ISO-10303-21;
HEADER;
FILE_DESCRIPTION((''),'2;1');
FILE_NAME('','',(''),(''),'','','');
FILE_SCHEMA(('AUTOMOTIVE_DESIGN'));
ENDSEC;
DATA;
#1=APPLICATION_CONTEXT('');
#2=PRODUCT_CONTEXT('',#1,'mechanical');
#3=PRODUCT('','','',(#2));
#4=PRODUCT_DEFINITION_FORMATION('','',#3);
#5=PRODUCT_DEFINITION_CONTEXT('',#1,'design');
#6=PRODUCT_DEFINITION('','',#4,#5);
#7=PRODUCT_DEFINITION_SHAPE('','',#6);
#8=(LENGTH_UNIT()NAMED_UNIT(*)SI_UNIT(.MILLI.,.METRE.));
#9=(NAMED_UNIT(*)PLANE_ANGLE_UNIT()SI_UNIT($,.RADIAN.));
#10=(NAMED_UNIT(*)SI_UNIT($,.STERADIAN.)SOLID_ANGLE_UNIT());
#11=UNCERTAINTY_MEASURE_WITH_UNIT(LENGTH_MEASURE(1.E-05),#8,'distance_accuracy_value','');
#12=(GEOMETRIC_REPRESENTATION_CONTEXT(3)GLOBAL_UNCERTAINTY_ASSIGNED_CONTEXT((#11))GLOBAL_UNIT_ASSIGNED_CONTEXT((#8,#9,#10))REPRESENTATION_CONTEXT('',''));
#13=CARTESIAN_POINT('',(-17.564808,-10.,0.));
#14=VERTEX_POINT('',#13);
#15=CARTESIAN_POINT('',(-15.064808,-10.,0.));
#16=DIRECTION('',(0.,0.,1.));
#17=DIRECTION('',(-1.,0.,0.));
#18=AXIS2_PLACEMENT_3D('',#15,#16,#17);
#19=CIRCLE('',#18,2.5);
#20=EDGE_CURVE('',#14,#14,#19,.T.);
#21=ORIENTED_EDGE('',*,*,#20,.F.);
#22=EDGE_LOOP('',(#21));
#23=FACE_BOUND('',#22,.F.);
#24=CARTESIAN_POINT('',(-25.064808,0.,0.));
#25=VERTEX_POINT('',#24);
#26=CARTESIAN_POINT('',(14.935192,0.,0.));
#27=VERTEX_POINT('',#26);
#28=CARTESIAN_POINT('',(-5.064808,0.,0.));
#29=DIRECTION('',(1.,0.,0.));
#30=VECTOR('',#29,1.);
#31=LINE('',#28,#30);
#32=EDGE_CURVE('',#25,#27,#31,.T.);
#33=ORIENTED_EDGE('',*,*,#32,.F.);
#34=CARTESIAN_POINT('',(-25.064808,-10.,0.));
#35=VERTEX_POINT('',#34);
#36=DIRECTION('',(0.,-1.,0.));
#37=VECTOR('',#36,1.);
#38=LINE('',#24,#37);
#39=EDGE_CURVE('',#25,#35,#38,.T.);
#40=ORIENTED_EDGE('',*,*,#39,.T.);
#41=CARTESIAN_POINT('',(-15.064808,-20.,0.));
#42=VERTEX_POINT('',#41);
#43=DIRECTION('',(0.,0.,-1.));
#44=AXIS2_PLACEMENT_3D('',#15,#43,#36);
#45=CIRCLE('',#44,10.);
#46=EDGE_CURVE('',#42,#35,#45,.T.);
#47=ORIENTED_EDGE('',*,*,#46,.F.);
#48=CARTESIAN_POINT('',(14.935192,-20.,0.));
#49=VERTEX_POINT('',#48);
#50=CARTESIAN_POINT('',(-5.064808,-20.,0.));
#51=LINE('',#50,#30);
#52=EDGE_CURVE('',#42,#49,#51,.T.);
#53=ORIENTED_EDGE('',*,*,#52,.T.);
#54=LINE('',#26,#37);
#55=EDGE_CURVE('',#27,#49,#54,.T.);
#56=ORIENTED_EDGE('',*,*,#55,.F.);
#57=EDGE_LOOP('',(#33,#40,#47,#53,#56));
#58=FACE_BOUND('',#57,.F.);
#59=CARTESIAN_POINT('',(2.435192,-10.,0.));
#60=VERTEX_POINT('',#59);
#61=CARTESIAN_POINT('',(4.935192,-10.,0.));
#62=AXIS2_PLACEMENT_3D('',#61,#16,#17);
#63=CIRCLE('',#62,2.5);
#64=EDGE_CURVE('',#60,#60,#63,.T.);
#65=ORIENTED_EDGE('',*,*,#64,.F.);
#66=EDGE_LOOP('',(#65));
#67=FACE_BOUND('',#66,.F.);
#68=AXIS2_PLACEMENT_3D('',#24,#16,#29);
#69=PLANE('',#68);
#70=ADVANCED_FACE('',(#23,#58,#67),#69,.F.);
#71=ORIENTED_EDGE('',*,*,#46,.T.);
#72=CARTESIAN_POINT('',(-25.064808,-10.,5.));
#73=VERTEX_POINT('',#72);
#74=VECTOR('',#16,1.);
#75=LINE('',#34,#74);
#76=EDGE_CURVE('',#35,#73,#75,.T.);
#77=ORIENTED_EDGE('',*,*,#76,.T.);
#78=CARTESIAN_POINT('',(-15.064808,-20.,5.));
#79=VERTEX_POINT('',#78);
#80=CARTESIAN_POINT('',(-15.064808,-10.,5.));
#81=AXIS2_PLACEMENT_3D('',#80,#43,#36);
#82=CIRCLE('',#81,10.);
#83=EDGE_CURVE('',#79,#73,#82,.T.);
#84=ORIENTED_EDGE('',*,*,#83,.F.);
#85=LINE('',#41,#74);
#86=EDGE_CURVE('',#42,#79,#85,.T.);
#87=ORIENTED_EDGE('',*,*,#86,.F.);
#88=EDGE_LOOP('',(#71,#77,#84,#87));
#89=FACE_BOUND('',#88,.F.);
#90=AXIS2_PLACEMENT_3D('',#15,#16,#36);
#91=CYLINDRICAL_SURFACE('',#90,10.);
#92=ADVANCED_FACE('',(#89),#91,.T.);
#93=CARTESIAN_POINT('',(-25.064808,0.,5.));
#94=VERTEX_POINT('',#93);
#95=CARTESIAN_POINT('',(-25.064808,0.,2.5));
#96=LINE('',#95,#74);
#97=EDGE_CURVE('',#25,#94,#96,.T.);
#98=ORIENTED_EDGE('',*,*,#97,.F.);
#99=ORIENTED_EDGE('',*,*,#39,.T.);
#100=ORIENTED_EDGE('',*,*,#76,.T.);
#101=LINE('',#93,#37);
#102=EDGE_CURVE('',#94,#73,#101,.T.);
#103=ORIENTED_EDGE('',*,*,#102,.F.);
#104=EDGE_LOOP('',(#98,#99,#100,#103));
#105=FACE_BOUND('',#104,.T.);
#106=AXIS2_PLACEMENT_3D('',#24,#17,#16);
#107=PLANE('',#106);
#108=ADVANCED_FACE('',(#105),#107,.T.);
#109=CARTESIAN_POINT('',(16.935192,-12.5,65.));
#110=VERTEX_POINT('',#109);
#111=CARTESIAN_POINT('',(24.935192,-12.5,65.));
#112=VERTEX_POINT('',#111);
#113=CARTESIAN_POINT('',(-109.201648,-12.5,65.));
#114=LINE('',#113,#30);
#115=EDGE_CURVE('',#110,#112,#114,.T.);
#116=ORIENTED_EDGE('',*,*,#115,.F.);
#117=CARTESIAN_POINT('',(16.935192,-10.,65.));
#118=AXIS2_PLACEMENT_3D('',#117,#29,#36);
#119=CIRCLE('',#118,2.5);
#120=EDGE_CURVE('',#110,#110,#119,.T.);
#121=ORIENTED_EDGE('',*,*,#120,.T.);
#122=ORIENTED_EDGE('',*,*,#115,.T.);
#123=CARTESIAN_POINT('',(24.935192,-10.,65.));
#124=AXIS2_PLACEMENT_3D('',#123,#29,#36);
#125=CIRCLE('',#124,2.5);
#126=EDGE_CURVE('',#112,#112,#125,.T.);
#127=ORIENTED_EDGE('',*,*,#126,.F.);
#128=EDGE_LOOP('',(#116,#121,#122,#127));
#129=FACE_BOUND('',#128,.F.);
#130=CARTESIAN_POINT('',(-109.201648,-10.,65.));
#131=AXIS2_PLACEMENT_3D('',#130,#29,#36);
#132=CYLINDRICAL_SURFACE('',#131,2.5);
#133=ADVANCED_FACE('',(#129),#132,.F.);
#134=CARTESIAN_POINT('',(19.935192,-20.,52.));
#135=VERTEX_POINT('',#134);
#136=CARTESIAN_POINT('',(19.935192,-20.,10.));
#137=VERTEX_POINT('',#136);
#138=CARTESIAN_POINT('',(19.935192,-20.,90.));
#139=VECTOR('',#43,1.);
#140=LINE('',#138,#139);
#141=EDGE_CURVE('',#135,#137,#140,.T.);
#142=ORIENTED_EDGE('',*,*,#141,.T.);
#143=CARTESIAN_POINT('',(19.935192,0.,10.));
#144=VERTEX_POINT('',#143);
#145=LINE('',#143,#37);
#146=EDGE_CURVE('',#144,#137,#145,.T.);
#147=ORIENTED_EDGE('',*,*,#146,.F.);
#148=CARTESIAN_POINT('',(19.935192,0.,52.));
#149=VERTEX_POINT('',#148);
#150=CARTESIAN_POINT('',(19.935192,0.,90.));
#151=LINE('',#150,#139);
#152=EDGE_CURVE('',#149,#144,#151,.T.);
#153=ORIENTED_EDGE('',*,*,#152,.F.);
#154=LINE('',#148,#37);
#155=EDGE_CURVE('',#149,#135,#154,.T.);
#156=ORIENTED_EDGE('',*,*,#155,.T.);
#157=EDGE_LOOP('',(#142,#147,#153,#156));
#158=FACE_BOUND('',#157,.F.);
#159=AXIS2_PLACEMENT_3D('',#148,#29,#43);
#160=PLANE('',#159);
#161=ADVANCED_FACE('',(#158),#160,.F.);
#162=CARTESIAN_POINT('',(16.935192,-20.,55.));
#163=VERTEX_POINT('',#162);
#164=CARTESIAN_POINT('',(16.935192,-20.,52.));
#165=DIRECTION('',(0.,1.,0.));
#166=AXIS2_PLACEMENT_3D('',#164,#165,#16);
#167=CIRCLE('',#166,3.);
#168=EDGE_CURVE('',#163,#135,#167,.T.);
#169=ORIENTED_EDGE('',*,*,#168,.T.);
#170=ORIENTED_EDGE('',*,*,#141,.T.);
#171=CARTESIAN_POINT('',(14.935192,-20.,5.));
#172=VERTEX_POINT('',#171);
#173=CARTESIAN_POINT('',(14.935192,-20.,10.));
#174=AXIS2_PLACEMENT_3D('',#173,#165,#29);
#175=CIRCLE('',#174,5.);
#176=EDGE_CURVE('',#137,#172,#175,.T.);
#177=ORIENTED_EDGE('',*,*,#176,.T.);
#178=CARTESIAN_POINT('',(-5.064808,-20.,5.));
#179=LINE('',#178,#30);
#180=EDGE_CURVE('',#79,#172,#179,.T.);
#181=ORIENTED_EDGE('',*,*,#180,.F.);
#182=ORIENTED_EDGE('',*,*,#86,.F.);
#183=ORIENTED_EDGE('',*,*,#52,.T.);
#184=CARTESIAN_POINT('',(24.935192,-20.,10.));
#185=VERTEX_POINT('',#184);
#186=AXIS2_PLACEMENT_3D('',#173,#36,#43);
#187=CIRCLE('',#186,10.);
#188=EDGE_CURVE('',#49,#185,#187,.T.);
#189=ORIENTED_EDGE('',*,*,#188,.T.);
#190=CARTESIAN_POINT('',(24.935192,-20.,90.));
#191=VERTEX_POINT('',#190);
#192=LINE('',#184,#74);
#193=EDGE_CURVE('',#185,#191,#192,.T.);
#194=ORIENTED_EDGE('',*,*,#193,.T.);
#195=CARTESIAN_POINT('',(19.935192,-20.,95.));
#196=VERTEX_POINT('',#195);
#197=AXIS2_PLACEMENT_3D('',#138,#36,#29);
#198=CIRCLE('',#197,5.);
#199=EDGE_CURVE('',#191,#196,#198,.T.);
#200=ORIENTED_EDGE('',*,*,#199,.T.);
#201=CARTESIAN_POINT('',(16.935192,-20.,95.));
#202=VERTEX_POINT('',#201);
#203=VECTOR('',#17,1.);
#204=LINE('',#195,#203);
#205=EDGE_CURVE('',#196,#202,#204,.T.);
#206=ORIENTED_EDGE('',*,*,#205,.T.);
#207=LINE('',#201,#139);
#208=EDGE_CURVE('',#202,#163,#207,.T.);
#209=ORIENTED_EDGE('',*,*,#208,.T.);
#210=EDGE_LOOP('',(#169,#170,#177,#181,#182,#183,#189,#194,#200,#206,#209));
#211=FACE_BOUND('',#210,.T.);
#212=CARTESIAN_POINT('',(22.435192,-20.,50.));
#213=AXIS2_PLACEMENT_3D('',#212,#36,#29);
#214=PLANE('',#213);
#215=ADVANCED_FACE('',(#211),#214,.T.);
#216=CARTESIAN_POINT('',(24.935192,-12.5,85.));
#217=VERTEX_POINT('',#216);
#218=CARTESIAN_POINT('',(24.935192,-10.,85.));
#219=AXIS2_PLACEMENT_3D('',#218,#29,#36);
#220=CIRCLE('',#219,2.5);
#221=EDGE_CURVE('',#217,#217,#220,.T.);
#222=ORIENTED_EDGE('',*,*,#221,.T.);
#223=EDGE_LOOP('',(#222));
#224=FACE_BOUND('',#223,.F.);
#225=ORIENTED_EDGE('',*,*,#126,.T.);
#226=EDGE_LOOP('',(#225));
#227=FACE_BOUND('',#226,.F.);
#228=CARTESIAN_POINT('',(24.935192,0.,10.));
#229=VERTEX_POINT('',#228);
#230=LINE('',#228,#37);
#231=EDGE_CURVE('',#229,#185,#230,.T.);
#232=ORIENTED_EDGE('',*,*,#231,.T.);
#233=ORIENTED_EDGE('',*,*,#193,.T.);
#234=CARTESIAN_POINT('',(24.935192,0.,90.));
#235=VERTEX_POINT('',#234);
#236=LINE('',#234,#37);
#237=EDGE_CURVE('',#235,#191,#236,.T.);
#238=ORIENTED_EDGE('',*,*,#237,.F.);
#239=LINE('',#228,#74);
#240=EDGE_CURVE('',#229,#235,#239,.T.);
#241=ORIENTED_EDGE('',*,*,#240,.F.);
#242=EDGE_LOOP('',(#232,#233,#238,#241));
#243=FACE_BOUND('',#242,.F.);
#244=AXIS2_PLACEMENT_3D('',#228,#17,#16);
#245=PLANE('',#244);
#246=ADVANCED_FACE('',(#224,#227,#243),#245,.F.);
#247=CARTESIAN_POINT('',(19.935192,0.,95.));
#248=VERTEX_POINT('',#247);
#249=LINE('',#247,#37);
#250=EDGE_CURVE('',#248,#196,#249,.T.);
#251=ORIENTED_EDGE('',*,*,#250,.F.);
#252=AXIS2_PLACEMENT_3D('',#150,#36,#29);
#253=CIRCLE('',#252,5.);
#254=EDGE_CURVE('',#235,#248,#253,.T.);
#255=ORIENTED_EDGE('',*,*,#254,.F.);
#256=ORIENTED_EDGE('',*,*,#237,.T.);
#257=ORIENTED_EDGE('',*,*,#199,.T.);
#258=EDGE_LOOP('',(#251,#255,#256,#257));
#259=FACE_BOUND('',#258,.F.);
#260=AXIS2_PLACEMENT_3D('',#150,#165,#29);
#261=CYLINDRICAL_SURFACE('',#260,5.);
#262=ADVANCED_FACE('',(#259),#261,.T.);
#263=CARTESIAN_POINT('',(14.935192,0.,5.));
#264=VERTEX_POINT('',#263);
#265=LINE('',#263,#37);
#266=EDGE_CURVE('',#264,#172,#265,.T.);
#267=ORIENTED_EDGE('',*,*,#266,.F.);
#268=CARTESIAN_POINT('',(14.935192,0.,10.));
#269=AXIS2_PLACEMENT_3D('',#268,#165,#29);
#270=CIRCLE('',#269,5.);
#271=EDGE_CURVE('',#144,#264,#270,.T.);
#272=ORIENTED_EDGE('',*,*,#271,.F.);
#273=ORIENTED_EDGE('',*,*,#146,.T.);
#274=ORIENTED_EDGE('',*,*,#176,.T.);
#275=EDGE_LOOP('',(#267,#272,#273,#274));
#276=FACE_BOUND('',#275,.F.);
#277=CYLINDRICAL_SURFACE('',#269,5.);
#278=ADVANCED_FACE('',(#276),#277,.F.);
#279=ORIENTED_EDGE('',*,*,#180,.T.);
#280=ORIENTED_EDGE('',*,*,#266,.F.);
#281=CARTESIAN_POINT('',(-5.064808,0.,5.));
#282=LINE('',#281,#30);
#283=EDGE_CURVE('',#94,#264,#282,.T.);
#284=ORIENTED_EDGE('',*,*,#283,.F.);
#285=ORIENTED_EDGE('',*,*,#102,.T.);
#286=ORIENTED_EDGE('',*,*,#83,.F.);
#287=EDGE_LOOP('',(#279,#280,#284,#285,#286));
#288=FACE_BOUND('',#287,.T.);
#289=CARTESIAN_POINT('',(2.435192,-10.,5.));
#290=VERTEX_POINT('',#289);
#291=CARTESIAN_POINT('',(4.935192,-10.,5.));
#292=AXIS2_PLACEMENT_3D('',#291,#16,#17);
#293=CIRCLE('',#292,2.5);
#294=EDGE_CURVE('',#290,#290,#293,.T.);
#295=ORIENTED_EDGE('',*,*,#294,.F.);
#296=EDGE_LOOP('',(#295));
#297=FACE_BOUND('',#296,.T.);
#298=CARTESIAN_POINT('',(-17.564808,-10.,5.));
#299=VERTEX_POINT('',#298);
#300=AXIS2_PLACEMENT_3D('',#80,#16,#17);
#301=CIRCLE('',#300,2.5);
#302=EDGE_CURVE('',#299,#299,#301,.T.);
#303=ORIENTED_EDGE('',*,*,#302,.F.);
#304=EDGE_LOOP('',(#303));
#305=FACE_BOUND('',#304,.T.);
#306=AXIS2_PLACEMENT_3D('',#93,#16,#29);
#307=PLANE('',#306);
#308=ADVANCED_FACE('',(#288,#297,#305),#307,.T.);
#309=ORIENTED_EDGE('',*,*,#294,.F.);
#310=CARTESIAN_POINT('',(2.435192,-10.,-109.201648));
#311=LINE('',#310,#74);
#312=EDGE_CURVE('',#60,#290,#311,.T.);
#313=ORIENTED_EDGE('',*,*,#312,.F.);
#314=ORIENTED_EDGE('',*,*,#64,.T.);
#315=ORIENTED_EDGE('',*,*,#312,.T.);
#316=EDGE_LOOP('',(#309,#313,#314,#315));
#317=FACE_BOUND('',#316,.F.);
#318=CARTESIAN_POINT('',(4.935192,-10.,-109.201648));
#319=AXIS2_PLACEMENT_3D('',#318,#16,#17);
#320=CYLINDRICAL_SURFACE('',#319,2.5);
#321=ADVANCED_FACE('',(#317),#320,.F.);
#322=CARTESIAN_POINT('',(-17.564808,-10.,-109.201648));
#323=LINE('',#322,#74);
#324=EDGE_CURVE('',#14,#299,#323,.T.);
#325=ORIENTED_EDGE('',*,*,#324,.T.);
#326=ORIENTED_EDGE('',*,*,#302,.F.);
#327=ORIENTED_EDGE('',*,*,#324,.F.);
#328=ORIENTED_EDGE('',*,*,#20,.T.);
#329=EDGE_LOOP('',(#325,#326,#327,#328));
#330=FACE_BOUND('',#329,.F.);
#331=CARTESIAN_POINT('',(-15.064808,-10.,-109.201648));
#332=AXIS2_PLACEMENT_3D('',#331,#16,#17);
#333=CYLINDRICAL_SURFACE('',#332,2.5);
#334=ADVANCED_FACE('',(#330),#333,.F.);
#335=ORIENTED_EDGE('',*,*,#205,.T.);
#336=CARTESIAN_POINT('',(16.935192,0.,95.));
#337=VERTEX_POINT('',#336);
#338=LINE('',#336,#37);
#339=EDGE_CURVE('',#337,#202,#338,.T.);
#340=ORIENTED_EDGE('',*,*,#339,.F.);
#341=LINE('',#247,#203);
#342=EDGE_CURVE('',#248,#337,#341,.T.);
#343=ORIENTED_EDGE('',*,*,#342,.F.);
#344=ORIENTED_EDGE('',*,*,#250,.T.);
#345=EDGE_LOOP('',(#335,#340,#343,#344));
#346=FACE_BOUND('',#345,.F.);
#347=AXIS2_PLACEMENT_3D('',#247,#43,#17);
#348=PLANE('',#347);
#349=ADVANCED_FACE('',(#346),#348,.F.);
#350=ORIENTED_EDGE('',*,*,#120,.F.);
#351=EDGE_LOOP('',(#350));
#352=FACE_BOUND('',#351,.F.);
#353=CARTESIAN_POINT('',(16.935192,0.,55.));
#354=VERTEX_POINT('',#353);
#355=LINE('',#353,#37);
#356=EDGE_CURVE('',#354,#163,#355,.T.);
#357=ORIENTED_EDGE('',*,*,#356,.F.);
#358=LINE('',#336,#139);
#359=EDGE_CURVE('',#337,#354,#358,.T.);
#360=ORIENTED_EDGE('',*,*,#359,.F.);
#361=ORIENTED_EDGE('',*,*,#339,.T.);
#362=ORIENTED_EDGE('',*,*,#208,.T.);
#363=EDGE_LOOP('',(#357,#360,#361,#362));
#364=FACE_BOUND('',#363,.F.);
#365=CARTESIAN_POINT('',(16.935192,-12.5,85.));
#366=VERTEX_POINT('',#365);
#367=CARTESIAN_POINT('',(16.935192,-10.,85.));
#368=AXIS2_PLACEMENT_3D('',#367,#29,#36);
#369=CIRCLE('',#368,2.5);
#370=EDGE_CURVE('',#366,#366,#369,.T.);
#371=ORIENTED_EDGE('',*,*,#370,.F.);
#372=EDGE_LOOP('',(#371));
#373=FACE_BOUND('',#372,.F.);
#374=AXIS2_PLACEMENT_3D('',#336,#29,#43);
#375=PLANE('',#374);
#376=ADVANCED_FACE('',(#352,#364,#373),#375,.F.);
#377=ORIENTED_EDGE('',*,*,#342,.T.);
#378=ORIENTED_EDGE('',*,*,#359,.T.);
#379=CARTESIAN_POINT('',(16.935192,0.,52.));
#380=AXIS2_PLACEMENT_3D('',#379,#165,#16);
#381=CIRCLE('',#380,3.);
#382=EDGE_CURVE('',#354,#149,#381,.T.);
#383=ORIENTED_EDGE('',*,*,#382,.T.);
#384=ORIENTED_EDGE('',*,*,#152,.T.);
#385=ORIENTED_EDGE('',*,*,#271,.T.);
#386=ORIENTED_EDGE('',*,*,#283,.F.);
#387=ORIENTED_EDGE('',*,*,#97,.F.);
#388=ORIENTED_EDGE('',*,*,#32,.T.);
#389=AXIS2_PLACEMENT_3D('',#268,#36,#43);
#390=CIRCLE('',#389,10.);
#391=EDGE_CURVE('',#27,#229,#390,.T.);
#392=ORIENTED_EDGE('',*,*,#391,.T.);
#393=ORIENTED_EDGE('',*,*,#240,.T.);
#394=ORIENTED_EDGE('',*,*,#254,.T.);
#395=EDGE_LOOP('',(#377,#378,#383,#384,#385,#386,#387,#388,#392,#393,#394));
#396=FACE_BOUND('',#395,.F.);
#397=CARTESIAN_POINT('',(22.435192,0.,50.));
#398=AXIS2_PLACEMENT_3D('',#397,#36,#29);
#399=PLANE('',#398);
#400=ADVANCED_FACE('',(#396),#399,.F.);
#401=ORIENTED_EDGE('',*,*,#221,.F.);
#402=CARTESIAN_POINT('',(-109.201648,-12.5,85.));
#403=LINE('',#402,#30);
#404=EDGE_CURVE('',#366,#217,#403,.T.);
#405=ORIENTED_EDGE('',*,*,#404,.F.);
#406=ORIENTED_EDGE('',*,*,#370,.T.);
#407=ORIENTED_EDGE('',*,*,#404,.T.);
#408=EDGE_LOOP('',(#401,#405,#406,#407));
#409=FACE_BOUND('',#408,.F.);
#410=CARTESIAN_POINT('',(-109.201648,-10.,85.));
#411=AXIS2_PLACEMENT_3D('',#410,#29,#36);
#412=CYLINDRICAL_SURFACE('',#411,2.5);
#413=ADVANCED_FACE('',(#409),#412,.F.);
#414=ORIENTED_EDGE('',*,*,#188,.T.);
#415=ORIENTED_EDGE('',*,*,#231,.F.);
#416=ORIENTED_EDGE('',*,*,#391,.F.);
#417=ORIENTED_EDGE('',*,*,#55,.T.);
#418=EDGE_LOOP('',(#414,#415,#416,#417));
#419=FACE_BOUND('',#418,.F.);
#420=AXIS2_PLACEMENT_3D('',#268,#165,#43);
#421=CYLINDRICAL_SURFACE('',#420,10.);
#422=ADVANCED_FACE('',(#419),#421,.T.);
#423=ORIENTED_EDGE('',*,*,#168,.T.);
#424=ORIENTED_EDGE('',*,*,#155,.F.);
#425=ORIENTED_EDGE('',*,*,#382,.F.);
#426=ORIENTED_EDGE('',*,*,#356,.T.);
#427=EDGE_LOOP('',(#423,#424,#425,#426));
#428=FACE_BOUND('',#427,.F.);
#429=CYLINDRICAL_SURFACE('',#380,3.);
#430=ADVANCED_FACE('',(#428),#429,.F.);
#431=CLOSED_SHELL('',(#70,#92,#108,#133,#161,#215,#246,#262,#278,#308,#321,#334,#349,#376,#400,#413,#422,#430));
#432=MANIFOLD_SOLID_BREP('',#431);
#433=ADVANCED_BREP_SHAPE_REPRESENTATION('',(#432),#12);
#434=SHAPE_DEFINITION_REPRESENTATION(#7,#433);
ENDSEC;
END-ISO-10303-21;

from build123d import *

# Parameters (mm, degrees)
F0_W     = 40
F0_H     = 5
F1_DEPTH = 20
F3_D     = 5
F5_D     = 5
F6_R     = 10


# Not quite as in the source:
# - a feature names something its author has since deleted; it is built from what else it names


with BuildPart() as f1:
    # F0 (on Front) → F1 (new body)
    with BuildSketch(Plane.XZ):
        Polygon((19.9351918133, 52), (19.9351918133, 10), (24.9351918133, 10), (24.9351918133, 90), (19.9351918133, 90), (19.9351918133, 55), align=None)
        with Locations((-5.0648081867, 2.5)):
            Rectangle(F0_W, F0_H)
        with BuildLine():
            ThreePointArc((19.9351918133, 10), (18.4707257193, 6.4644660941), (14.9351918133, 5))
            Line((14.9351918133, 5), (14.9351918133, 0))
            ThreePointArc((14.9351918133, 0), (22.0062596252, 2.9289321881), (24.9351918133, 10))
            Line((24.9351918133, 10), (19.9351918133, 10))
        make_face()
        Polygon((16.9351918133, 55), (19.9351918133, 55), (19.9351918133, 90), (19.9351918133, 95), (16.9351918133, 95), align=None)
        with BuildLine():
            Line((19.9351918133, 90), (24.9351918133, 90))
            ThreePointArc((24.9351918133, 90), (23.4707257193, 93.5355339059), (19.9351918133, 95))
            Line((19.9351918133, 95), (19.9351918133, 90))
        make_face()
        with BuildLine():
            ThreePointArc((16.9351918133, 55), (19.0565121569, 54.1213203436), (19.9351918133, 52))
            Line((19.9351918133, 52), (19.9351918133, 55))
            Line((19.9351918133, 55), (16.9351918133, 55))
        make_face()
    extrude(amount=F1_DEPTH)

    # F3 (through all)
    with Locations(Plane(origin=(0, 0, 0), x_dir=(0, 1, 0), z_dir=(-1, 0, 0))):
        with Locations((-10, -85), (-10, -65)):
            Hole(F3_D / 2)

    # F5 (through all)
    with Locations(Plane(origin=(0, 0, 0), x_dir=(1, 0, 0), z_dir=(0, 0, -1))):
        with Locations((-15.0648081867, 10), (4.9351918133, 10)):
            Hole(F5_D / 2)

    # F6
    f6_edges = [f1.edges().sort_by_distance(p)[0] for p in [
        (-25.064808, -20, 2.5),
    ]]
    fillet(f6_edges, radius=F6_R)


solid = f1.part
